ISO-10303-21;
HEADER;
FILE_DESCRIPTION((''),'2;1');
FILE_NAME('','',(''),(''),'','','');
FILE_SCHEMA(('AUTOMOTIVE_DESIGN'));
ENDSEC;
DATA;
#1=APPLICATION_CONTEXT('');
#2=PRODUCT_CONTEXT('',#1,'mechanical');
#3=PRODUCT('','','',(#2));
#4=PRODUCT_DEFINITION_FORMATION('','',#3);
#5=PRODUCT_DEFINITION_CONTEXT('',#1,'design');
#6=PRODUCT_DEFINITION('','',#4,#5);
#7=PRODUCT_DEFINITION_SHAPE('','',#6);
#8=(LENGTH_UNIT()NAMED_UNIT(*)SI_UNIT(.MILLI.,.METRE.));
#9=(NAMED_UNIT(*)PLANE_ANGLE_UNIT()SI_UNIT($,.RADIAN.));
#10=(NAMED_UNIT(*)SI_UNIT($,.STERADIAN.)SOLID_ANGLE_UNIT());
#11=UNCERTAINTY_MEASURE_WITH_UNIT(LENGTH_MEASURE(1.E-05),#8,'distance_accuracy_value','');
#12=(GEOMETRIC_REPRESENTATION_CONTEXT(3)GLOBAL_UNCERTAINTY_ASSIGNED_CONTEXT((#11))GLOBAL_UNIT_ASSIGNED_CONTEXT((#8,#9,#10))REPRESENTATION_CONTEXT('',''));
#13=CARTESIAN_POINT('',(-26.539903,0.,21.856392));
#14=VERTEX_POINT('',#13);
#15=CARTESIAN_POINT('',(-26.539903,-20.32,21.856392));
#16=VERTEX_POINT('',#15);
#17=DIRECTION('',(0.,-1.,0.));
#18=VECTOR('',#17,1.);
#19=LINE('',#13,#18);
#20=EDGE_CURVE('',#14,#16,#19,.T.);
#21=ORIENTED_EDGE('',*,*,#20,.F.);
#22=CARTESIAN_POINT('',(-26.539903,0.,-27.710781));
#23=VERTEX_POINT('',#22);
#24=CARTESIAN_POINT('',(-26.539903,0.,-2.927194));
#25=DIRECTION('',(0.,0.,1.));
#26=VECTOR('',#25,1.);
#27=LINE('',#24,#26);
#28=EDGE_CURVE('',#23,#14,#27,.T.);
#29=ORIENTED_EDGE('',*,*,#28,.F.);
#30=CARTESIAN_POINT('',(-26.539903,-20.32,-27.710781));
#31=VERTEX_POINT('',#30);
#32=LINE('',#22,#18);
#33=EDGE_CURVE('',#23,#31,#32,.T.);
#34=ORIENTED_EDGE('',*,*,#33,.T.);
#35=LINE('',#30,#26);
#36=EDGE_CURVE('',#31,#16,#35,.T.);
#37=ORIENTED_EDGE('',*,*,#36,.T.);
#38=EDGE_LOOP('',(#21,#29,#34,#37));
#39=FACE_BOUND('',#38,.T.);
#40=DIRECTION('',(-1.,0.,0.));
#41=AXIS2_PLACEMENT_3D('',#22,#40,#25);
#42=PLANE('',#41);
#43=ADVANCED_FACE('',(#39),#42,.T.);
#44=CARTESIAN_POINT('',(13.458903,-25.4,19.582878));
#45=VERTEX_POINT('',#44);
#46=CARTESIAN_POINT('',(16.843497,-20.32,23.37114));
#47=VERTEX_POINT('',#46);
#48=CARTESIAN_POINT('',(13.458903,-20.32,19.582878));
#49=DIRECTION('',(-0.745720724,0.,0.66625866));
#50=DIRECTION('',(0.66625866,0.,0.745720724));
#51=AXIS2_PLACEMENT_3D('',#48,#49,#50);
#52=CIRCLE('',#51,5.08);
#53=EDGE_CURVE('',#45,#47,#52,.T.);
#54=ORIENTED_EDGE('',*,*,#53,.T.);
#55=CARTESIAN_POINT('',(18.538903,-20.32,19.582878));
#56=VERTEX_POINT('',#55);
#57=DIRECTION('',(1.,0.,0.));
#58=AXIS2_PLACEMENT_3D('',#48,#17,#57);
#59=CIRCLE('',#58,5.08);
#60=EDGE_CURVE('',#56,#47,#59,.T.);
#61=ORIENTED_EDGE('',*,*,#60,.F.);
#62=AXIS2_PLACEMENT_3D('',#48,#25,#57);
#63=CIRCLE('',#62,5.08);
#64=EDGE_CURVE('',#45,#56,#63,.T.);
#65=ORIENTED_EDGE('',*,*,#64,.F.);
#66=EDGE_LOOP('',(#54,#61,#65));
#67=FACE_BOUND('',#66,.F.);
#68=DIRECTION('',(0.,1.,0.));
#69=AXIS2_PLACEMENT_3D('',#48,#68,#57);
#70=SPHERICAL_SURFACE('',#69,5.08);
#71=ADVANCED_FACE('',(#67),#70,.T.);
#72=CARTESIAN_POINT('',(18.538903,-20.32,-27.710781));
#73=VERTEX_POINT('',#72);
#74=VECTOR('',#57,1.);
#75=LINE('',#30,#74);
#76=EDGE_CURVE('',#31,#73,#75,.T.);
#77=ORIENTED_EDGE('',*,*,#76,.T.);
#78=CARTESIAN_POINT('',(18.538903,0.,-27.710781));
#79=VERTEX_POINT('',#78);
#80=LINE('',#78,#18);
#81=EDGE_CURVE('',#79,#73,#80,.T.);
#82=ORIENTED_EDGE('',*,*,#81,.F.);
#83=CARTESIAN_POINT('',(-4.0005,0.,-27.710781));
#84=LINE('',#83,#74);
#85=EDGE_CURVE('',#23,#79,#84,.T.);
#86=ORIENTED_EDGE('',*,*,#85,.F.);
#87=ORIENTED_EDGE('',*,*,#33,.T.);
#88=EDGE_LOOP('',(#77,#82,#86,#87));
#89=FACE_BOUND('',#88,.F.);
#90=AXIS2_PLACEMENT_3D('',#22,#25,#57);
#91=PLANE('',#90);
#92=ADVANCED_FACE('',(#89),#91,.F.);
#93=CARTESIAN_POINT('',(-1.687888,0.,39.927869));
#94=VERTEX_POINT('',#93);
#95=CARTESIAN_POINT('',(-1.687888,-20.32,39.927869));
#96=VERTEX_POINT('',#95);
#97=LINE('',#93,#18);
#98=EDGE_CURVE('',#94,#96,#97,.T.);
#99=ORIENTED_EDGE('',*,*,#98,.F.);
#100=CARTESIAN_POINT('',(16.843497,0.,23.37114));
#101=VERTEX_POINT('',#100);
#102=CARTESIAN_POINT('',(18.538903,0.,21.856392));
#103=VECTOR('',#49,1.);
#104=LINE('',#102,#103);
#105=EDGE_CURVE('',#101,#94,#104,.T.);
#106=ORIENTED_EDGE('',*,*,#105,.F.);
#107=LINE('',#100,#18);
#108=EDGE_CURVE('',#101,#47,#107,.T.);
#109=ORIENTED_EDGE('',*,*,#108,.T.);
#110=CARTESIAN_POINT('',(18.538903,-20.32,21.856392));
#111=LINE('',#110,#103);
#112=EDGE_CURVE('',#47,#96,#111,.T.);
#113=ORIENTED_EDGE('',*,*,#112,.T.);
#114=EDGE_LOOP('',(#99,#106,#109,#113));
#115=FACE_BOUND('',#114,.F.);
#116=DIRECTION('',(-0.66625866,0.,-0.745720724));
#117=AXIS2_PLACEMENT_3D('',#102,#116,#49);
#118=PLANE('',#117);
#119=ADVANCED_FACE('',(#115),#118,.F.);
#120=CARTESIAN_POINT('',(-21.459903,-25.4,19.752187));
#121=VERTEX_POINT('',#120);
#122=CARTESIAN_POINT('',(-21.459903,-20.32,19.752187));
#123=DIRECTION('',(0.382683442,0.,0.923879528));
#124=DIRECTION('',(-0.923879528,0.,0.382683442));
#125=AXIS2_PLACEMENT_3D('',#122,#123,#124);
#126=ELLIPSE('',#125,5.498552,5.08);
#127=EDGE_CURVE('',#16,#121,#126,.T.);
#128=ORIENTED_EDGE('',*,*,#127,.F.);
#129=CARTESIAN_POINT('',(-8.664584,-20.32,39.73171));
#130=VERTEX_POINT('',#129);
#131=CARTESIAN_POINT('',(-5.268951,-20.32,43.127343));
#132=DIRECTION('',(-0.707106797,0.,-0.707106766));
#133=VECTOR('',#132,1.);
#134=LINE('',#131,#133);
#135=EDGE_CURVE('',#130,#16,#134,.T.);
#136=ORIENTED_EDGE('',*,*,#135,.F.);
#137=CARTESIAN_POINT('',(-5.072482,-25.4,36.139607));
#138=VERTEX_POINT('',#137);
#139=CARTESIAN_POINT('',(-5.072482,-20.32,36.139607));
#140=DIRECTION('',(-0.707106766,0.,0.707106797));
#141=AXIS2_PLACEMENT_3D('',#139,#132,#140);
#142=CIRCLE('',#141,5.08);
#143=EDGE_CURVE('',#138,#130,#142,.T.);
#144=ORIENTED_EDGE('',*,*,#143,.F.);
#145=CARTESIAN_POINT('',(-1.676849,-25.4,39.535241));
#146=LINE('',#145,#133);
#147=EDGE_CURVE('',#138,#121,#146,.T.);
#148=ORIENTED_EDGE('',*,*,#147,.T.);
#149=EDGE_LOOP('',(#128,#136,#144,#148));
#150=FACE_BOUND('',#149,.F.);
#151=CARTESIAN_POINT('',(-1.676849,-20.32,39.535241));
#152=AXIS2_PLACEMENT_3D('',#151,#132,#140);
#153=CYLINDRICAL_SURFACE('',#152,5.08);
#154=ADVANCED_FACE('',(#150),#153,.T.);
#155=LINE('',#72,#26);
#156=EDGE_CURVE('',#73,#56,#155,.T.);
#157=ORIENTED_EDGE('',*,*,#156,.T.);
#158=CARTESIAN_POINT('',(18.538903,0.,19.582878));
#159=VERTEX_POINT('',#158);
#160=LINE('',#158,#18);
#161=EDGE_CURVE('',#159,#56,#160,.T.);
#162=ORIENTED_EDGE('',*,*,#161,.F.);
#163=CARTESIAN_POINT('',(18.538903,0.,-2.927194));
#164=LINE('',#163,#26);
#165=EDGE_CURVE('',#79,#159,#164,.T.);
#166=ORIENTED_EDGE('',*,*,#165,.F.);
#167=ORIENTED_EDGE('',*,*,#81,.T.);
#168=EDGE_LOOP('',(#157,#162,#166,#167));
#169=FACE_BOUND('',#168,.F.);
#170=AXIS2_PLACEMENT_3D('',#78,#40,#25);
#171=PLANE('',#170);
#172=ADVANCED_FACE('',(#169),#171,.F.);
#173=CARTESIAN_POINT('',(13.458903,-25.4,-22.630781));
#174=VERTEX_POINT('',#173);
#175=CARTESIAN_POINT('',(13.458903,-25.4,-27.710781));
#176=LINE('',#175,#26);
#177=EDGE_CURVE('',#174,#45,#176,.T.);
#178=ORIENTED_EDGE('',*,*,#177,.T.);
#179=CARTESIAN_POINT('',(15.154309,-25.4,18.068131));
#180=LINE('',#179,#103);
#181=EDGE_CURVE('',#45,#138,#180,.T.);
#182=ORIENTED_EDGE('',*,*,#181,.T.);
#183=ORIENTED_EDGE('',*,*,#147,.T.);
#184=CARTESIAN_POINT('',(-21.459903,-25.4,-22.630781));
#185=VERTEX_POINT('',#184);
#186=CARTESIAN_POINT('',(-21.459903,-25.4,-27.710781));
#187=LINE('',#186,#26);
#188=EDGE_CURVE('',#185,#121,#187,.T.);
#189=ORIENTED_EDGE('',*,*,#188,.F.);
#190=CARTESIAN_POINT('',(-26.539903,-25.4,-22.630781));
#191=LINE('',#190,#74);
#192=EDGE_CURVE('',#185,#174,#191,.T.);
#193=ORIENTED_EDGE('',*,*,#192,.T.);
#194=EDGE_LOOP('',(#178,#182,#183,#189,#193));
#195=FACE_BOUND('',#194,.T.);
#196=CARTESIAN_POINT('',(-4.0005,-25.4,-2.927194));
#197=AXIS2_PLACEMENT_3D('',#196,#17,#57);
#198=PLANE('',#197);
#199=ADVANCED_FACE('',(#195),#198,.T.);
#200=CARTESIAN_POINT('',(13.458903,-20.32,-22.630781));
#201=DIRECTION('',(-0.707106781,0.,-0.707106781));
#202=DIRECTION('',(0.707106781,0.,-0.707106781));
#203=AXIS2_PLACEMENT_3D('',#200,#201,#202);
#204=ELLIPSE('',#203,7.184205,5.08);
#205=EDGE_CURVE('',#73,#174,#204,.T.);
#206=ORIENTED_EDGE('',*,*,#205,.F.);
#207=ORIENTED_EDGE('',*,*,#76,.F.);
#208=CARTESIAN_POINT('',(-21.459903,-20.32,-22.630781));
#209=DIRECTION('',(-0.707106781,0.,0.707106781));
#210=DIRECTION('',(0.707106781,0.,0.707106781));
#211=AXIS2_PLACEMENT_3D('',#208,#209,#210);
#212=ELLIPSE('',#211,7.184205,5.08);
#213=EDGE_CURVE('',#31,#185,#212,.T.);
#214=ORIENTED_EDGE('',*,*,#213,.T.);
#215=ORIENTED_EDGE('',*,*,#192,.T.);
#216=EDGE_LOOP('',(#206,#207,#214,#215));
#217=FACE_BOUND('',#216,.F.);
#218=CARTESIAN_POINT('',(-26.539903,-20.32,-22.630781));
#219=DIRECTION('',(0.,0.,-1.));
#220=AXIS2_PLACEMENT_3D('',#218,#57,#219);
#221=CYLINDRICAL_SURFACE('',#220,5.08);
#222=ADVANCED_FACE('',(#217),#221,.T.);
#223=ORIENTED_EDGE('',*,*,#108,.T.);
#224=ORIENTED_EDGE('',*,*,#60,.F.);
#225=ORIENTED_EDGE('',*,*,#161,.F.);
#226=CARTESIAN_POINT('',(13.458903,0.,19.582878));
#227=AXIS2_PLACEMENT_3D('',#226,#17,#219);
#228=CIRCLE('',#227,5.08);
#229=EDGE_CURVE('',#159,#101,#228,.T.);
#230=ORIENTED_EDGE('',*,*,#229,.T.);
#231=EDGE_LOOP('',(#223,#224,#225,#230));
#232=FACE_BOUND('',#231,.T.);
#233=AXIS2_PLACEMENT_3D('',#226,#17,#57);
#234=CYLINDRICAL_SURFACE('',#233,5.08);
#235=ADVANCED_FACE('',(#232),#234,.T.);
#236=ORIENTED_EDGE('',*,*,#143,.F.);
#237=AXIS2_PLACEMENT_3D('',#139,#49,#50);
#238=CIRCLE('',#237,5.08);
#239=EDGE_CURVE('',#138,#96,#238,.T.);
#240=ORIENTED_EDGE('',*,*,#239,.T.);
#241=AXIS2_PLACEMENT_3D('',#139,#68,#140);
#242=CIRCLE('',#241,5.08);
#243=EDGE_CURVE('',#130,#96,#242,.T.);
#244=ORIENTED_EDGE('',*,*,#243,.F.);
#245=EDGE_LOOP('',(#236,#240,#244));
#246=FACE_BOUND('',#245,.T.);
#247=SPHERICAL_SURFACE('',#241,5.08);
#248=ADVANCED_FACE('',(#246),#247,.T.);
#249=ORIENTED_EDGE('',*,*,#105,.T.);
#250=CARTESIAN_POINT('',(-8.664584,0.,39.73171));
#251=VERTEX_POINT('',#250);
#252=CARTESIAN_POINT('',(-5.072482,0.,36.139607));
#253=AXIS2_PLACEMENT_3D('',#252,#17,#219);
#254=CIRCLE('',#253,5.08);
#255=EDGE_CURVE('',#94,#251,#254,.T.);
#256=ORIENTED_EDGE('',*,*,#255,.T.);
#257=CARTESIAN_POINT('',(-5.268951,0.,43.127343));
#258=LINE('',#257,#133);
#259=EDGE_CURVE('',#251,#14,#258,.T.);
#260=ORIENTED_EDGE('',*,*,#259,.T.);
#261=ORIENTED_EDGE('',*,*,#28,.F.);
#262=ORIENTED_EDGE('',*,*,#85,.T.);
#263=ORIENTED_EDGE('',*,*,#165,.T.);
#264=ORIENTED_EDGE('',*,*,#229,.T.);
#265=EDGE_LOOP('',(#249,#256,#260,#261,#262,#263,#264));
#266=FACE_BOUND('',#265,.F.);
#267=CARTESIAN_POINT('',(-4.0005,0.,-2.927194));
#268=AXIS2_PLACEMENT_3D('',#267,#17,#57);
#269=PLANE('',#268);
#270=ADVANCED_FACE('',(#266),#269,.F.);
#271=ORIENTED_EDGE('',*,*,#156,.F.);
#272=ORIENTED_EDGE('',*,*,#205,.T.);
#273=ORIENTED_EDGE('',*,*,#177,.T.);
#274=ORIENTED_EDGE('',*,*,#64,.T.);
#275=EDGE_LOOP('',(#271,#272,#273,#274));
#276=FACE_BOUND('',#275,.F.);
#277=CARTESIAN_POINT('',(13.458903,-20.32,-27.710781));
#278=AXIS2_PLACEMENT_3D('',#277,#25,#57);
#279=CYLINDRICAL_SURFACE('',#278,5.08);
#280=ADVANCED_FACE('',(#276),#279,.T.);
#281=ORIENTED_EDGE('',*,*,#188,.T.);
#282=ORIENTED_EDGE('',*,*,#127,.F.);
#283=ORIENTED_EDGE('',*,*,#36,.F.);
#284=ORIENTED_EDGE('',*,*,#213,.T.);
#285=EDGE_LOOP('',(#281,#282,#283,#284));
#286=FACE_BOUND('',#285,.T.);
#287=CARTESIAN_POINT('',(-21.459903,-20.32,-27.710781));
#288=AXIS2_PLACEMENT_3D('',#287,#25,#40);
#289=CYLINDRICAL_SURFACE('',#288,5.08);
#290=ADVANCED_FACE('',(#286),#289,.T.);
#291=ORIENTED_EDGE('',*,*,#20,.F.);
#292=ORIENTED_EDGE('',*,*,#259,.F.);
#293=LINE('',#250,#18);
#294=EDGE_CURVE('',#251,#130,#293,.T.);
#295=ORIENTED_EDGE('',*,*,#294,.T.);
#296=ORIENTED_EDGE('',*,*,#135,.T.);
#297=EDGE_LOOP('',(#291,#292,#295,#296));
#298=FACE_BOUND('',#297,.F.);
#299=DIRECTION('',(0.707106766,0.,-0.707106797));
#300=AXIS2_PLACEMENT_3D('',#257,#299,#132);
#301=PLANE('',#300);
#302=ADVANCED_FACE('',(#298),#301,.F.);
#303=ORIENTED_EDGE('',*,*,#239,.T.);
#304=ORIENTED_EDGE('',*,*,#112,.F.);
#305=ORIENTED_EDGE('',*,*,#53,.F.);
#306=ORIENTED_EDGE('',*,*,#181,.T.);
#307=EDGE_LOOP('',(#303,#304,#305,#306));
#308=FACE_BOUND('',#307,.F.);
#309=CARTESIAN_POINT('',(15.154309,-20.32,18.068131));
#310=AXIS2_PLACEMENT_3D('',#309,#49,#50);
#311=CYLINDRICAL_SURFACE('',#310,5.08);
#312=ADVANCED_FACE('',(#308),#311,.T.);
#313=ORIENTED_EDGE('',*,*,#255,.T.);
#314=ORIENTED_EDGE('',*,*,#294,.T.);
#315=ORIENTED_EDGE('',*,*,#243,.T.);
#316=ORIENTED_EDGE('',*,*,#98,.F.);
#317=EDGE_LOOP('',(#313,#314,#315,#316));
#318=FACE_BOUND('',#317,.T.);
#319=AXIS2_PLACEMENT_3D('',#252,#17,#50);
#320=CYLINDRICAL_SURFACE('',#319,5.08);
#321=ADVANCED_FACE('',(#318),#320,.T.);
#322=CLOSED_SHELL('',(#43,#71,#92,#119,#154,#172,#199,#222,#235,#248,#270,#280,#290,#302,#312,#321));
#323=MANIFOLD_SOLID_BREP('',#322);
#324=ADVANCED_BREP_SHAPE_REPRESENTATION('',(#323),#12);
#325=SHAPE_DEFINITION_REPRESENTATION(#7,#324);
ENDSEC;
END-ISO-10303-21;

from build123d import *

# Parameters (mm, degrees)
F0_W     = 45.0788065791
F0_H     = 49.5671723038
F1_DEPTH = 25.4
F3_R     = 5.08


# Not quite as in the source:
# - a feature of the source that left no trace in its solid (it failed there, or was rolled back) is left out


with BuildPart() as f1:
    # F0 (on Front) → F1 (new body)
    with BuildSketch(Plane.XZ):
        with Locations((-4.0004998446, -2.9271943495)):
            Rectangle(F0_W, F0_H)
        Polygon((-5.2689509466, 43.1273430586), (-26.5399031341, 21.8563918024), (18.538903445, 21.8563918024), align=None)
    extrude(amount=F1_DEPTH)

    # F3
    f3_edges = [f1.edges().sort_by_distance(p)[0] for p in [
        (-15.904427, -25.4, 32.491867),
        (-26.539903, -25.4, -2.927194),
        (-4.0005, -25.4, -27.710781),
        (18.538903, -25.4, -2.927194),
        (6.634976, -25.4, 32.491867),
        (18.538903, -12.7, 21.856392),
        (-5.268951, -12.7, 43.127343),
    ]]
    fillet(f3_edges, radius=F3_R)


solid = f1.part
